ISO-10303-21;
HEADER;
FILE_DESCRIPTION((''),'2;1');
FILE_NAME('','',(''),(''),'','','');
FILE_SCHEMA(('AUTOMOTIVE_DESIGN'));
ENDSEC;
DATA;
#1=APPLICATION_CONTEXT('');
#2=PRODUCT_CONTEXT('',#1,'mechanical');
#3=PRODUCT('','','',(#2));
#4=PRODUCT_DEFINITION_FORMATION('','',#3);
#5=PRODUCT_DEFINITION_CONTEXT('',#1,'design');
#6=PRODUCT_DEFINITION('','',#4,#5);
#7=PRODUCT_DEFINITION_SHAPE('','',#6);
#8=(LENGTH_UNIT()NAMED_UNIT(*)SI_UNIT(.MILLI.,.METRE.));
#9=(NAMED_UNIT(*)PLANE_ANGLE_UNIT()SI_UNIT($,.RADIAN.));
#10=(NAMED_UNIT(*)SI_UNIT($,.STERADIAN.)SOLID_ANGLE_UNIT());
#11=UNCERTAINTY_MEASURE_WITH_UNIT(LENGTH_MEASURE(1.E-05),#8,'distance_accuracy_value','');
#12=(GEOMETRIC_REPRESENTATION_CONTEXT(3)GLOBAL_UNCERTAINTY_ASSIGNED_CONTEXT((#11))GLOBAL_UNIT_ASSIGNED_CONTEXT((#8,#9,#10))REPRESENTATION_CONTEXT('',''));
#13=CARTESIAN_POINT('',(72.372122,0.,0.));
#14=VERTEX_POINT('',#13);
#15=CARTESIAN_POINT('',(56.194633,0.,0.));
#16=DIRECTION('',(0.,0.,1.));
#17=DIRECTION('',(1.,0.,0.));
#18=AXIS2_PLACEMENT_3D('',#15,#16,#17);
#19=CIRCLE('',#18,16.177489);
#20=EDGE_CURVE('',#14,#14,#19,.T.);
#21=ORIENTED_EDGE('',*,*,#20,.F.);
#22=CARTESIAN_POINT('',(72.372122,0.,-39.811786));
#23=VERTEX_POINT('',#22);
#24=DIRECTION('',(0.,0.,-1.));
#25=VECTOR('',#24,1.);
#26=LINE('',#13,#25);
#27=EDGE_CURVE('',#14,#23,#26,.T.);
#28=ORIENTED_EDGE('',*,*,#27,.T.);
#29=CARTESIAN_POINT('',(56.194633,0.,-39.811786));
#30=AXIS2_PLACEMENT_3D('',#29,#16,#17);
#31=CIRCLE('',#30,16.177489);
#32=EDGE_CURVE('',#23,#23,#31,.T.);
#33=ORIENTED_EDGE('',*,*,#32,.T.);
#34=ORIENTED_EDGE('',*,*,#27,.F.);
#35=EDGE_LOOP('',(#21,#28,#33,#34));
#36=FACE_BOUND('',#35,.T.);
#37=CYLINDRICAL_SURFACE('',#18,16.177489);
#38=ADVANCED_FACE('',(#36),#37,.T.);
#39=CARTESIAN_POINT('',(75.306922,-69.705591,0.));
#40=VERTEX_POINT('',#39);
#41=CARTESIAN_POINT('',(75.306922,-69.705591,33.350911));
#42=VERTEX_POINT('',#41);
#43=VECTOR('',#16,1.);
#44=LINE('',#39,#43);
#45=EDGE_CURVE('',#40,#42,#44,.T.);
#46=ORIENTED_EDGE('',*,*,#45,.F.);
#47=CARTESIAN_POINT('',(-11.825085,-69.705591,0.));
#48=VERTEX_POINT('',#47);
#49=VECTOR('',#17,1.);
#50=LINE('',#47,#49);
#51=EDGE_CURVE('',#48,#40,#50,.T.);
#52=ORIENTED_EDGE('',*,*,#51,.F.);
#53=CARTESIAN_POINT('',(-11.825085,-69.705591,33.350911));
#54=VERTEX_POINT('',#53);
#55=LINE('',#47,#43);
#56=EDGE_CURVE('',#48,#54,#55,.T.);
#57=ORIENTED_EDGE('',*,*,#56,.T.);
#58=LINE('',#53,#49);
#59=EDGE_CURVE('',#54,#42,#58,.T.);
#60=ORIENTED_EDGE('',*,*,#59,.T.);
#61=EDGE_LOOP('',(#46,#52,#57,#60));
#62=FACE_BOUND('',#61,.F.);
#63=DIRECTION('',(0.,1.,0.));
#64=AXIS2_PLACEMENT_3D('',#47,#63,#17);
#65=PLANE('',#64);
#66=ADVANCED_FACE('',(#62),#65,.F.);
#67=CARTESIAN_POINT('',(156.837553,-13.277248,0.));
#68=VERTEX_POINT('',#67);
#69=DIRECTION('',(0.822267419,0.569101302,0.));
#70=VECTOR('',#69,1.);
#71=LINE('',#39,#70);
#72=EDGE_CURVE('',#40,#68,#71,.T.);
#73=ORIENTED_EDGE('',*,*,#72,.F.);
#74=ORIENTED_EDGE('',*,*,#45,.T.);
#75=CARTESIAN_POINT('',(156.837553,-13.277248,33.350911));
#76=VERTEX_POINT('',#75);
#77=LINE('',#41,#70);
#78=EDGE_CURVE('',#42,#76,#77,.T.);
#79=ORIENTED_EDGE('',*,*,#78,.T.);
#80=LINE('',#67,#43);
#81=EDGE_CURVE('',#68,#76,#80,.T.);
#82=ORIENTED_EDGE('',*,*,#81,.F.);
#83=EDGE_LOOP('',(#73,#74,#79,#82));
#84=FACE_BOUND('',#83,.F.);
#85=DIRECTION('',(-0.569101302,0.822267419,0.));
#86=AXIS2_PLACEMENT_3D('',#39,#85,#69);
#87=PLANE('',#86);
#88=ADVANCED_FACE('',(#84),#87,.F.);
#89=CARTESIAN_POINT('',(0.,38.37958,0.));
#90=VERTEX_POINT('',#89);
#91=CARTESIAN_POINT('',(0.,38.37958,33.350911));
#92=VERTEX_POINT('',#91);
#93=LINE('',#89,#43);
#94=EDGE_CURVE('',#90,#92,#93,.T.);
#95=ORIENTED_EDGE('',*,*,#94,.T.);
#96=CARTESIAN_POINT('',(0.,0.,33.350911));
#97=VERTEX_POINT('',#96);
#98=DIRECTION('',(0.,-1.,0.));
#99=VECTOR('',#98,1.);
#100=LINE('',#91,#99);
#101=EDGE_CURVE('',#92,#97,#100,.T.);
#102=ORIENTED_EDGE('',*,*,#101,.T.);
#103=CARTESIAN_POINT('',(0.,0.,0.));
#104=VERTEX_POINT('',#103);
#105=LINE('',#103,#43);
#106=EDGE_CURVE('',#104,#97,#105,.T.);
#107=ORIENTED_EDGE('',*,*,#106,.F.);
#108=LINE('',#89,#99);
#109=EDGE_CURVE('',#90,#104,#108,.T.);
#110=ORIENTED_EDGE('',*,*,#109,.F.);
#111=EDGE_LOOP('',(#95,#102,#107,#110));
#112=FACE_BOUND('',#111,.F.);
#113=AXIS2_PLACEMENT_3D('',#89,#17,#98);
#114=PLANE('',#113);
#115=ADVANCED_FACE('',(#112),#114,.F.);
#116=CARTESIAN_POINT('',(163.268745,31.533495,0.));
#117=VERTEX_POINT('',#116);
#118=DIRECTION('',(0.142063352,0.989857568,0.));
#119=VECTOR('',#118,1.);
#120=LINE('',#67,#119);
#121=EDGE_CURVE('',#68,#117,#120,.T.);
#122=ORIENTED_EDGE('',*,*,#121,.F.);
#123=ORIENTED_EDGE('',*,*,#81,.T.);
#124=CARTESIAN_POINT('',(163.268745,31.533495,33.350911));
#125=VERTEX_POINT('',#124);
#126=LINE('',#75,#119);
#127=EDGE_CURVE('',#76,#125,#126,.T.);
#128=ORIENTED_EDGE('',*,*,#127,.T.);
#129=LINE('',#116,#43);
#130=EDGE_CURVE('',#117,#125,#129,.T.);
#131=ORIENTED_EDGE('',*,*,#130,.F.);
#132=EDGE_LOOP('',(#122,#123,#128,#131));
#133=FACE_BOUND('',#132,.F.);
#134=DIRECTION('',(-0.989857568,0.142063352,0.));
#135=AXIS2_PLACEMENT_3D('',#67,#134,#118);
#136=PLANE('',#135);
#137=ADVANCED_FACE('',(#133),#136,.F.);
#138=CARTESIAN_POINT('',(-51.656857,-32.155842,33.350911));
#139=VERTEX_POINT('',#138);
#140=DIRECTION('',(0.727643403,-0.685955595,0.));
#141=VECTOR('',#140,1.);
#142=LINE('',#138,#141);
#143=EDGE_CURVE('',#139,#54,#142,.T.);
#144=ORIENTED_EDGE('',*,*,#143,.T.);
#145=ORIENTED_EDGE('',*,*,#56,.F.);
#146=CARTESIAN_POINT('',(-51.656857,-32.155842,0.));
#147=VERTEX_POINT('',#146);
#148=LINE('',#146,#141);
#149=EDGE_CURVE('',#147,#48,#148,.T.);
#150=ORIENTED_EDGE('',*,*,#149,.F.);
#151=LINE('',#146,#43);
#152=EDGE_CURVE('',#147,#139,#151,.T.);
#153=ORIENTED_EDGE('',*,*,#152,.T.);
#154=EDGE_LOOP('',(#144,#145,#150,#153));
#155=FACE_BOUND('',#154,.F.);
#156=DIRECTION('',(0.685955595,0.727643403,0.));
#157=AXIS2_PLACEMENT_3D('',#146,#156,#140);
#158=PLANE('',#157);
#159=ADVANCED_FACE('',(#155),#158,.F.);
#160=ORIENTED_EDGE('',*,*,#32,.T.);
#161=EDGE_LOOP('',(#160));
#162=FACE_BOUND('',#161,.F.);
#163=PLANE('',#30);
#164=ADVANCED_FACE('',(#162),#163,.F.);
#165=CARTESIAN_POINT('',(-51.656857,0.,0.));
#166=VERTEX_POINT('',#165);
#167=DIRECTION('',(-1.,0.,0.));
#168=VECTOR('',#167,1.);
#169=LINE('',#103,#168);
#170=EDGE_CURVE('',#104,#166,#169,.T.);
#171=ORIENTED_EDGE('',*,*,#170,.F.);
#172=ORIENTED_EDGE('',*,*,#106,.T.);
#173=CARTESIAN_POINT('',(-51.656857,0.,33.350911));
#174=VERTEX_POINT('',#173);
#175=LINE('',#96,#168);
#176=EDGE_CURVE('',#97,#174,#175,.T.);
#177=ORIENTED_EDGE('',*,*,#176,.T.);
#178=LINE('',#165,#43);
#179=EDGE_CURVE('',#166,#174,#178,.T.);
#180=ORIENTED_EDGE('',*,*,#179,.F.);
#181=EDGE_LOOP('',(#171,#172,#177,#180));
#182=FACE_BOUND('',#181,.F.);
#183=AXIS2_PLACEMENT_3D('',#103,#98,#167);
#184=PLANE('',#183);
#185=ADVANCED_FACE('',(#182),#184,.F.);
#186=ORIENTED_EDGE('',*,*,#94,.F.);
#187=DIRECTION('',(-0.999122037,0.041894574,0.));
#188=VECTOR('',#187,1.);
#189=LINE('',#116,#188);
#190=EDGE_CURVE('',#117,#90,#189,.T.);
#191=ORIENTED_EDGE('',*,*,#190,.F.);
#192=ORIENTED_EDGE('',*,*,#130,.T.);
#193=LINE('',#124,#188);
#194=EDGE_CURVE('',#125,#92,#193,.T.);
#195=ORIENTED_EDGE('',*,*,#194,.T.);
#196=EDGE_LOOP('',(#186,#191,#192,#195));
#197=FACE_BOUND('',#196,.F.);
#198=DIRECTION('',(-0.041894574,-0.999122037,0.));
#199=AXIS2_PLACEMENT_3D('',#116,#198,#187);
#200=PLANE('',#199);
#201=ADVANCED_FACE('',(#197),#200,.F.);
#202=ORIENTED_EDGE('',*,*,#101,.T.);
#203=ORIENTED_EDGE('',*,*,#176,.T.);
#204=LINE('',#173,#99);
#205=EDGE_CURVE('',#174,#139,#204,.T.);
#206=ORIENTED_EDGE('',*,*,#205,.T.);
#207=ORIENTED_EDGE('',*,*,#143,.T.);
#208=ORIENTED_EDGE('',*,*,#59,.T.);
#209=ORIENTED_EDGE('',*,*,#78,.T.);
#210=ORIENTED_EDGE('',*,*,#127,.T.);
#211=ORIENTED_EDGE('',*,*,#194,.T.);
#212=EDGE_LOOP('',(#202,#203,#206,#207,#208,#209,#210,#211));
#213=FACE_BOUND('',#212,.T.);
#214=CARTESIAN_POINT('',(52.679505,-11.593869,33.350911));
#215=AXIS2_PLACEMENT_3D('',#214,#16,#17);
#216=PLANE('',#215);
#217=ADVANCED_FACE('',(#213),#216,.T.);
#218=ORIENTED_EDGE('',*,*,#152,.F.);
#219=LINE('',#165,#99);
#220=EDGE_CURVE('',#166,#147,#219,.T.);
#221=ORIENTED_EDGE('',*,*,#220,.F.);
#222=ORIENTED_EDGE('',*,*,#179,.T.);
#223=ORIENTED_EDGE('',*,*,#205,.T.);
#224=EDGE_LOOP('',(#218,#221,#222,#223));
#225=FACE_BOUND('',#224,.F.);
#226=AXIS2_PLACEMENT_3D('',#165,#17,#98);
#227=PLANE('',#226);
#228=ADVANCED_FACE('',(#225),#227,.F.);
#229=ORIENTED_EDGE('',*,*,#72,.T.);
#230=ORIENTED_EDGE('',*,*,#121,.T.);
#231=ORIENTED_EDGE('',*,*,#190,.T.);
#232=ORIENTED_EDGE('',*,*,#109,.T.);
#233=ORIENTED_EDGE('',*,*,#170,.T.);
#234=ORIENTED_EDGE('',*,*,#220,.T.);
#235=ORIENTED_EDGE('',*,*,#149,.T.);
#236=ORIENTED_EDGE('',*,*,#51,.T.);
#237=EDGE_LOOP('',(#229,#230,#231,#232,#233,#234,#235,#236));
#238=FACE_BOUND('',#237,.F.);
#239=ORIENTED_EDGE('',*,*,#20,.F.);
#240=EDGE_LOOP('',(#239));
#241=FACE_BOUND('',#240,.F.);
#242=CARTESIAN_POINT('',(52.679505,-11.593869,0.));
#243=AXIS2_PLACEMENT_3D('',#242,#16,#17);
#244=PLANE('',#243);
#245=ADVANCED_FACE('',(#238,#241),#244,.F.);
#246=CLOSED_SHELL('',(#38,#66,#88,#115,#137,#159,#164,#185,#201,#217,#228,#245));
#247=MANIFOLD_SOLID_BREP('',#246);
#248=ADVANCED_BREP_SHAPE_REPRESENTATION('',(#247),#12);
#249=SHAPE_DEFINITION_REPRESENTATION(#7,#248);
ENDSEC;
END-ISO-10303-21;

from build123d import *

# Parameters (mm, degrees)
F1_DEPTH = 33.3509109914
F2_R     = 16.1774889393
F3_DEPTH = 39.8117862642


# Not quite as in the source:
# - a feature names something its author has since deleted; it is built from what else it names


with BuildPart() as f1:
    # F0 (on Top) → F1 (new body)
    with BuildSketch(Plane.XY):
        Polygon((75.3069221973, -69.7055906057), (156.8375527859, -13.2772475481), (160.0531488657, 9.1281235218), (163.2687449455, 31.5334945917), (0, 38.3795797825), (0, 0), (-51.6568571329, 0), (-51.6568571329, -32.155841589), (-11.8250846863, -69.7055906057), align=None)
    extrude(amount=F1_DEPTH)

    # F2 (on Top) → F3 (join)
    with BuildSketch(Plane.XY):
        with Locations((56.1946332455, 0)):
            Circle(F2_R)
    extrude(amount=-F3_DEPTH)


solid = f1.part
